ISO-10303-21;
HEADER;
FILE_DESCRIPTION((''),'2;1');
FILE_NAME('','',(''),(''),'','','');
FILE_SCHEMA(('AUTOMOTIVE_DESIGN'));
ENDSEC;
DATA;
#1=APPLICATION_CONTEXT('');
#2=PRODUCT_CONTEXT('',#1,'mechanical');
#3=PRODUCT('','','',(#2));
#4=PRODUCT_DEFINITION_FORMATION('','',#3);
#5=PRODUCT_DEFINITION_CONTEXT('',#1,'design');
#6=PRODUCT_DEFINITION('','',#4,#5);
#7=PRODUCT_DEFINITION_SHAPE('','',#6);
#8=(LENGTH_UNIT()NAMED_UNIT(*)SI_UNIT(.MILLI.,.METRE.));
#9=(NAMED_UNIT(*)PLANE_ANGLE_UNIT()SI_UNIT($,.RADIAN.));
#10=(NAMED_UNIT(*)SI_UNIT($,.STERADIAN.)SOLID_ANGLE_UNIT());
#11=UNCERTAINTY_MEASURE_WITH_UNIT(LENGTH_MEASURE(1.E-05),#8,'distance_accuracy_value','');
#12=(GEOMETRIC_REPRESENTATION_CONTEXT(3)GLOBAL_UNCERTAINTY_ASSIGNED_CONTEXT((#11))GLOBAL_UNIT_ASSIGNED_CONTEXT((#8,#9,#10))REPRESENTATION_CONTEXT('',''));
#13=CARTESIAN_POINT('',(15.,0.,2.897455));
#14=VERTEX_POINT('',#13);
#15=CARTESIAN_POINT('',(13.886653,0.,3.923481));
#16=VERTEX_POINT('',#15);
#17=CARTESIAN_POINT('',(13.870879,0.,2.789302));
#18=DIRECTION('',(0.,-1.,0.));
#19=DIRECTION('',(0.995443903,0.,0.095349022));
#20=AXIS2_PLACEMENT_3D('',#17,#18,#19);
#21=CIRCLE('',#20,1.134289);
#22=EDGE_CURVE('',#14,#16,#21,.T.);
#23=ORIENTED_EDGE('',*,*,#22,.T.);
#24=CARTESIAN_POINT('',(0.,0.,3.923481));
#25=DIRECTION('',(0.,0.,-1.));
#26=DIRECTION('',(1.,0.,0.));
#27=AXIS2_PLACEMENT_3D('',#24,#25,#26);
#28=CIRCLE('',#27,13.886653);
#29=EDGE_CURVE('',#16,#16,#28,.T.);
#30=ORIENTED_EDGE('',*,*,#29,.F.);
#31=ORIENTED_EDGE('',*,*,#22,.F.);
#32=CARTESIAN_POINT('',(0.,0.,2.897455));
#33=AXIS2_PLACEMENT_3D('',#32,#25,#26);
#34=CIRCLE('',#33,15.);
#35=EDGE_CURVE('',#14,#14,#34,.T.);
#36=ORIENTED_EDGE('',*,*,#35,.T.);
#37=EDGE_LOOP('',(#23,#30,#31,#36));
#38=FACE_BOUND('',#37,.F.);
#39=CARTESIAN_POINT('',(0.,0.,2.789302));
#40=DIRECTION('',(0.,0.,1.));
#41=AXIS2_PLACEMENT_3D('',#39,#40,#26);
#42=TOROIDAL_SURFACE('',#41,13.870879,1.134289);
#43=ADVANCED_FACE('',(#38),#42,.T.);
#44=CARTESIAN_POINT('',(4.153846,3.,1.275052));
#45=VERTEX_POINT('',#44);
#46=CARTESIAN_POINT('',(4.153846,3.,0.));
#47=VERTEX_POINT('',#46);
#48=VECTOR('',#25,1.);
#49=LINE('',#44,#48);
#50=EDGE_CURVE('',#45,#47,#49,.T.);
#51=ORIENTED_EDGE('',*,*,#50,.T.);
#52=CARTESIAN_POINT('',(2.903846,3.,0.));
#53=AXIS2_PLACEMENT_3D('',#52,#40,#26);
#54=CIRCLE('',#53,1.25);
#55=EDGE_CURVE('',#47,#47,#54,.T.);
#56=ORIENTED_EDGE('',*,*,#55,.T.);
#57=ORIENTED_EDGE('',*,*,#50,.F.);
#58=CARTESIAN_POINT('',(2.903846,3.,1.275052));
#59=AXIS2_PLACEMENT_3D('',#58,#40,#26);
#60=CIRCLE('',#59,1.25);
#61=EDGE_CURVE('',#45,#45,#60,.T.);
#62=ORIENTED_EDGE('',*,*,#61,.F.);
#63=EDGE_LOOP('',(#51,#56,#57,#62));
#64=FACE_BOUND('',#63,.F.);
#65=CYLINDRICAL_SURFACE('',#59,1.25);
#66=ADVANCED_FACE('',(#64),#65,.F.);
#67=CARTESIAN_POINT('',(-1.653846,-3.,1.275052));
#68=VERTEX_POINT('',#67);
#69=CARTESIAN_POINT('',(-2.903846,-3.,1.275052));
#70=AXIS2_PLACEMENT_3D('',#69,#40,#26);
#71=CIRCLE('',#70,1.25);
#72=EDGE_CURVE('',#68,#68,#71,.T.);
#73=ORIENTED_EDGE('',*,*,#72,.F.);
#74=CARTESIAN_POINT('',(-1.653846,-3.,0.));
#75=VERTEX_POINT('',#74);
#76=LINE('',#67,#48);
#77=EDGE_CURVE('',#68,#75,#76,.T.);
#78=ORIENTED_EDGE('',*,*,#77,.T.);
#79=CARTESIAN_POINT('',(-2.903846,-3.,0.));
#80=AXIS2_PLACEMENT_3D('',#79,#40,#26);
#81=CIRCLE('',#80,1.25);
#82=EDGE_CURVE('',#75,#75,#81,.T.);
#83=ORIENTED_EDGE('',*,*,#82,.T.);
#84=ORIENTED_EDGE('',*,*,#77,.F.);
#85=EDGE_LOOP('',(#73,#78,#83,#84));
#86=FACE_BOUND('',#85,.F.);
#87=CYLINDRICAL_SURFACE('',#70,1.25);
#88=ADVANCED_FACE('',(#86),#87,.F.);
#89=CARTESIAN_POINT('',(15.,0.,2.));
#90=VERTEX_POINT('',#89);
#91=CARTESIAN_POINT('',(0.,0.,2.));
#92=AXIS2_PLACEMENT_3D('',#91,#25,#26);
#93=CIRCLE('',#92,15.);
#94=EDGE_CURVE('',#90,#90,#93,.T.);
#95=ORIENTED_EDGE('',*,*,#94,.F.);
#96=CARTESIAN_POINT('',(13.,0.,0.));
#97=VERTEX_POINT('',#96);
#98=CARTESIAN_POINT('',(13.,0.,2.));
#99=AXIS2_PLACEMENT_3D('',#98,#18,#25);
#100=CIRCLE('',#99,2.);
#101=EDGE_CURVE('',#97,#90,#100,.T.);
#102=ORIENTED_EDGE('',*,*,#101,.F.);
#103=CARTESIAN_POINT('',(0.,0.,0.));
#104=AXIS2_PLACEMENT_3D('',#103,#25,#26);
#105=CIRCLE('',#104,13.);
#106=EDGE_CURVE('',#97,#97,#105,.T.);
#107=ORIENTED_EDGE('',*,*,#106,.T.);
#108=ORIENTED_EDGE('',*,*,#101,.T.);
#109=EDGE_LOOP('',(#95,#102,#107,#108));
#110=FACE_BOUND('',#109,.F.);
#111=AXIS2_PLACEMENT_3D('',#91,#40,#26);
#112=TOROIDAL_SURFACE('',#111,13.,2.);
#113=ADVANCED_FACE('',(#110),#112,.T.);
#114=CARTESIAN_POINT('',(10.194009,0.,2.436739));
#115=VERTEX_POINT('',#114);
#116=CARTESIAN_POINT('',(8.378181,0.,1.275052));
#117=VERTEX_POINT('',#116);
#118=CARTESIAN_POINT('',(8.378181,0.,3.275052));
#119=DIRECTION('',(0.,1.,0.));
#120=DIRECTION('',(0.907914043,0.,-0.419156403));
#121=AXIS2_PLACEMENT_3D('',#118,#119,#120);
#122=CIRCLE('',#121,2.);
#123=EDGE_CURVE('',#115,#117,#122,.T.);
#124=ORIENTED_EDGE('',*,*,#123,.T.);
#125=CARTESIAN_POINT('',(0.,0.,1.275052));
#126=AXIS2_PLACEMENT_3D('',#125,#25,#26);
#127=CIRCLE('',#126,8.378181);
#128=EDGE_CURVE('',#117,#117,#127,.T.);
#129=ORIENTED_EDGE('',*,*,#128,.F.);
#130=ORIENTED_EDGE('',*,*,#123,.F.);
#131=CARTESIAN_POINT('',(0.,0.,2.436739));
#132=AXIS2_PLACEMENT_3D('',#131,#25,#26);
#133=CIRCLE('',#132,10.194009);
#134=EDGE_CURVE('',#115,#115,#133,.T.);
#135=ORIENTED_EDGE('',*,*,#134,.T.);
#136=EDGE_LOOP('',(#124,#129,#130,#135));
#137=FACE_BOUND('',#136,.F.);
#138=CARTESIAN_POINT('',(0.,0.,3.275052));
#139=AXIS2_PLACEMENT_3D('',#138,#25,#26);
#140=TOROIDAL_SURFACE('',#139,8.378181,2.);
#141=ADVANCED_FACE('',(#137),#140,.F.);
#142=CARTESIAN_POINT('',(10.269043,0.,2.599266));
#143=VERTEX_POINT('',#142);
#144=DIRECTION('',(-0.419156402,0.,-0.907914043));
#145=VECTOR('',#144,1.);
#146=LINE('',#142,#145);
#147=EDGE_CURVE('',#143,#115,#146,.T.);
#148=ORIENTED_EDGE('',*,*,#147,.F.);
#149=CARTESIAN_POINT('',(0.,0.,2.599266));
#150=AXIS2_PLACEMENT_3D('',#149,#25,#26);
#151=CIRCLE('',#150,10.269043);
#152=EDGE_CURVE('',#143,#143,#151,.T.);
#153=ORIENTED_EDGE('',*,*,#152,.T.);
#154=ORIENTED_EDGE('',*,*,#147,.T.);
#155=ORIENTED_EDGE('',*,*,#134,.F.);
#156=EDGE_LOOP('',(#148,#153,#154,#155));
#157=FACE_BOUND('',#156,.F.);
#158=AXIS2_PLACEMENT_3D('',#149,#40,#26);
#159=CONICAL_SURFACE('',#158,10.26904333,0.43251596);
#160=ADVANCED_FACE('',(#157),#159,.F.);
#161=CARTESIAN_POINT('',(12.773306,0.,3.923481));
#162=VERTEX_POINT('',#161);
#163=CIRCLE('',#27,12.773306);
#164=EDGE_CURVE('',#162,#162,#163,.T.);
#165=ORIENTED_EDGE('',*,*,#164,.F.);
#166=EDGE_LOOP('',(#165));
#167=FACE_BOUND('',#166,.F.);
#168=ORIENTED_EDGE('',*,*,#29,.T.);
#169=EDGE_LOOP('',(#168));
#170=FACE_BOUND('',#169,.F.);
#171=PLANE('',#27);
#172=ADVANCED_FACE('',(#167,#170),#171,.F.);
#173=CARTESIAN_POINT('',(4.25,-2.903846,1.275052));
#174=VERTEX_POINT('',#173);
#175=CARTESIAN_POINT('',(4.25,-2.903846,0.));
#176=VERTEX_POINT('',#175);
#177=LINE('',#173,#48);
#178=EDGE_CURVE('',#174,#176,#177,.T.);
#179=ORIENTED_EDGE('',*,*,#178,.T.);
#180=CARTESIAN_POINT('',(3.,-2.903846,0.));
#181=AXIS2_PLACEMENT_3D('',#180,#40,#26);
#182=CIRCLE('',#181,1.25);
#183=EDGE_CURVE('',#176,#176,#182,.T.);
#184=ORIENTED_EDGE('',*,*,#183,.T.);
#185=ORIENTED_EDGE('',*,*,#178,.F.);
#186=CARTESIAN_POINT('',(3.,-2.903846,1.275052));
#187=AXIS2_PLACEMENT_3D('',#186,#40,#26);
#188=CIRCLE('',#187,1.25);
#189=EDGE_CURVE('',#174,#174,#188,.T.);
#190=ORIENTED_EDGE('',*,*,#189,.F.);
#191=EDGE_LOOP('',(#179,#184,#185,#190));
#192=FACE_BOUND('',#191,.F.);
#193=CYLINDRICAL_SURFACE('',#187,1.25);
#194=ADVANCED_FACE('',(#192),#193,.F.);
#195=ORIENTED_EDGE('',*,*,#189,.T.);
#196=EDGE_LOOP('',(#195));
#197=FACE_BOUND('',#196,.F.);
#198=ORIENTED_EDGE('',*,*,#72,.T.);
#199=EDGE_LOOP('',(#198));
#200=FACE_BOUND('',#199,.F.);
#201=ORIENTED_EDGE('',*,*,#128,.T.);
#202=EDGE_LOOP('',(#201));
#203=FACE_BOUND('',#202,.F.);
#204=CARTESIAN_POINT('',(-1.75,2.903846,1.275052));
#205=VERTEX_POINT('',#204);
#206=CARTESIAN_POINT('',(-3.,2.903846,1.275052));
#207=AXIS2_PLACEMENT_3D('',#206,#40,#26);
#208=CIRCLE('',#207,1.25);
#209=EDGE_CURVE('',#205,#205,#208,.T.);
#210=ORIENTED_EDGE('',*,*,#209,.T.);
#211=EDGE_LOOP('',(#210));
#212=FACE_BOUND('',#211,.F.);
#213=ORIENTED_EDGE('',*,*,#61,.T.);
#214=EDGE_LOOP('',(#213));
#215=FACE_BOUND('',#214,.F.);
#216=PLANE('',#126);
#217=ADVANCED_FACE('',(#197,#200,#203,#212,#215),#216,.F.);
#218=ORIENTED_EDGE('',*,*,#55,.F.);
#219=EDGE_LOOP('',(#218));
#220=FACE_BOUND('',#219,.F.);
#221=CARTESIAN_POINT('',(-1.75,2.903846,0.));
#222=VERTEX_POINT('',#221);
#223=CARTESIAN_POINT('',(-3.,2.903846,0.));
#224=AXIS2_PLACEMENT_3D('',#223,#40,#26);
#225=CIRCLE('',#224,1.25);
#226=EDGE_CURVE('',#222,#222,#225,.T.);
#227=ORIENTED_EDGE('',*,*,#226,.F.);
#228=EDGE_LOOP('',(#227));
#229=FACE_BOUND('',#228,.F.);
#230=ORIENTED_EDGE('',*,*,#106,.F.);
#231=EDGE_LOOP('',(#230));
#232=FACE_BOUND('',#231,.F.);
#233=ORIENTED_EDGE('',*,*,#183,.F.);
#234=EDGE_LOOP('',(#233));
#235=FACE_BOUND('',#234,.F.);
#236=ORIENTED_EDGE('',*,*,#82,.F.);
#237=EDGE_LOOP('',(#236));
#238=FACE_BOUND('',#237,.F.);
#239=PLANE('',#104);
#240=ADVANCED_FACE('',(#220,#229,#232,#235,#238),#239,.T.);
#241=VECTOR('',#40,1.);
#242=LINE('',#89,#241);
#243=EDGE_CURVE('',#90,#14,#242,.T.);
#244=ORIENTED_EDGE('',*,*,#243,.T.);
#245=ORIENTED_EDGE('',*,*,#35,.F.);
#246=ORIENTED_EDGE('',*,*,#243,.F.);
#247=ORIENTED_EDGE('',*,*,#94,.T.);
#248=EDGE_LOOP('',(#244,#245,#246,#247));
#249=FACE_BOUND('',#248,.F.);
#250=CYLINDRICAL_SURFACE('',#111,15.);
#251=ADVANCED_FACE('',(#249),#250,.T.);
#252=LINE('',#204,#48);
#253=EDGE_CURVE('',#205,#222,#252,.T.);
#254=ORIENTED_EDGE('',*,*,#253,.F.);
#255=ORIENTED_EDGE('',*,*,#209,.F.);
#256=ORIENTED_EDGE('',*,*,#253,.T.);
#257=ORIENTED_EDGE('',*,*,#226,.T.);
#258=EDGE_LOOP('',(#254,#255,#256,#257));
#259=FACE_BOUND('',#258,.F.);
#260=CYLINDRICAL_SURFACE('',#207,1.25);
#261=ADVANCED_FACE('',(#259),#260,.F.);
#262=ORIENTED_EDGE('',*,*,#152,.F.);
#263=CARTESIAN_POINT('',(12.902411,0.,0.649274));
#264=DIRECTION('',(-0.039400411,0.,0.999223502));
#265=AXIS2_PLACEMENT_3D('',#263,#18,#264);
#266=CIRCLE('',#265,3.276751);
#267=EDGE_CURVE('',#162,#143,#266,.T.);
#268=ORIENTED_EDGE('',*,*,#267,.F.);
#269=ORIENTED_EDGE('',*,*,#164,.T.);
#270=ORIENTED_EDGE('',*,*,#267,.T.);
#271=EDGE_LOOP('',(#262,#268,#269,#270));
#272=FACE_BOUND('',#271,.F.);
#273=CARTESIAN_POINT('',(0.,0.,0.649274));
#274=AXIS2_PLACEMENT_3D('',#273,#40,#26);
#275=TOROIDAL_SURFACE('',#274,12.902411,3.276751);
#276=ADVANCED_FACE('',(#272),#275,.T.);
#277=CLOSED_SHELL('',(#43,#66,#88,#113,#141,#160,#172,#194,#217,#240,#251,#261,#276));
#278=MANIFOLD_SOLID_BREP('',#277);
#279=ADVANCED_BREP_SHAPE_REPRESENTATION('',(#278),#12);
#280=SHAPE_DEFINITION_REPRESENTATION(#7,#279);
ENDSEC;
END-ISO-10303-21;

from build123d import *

# Parameters (mm, degrees)
F2_R     = 1.25
F3_DEPTH = 5.1


# Not quite as in the source:
# - a feature names something its author has since deleted; it is built from what else it names


with BuildPart() as f1:
    # F0 (on Front) → F1 (revolve)
    with BuildSketch(Plane.XZ):
        with BuildLine():
            Line((0, 1.2750519672), (0, 0))
            Line((0, 0), (13, 0))
            ThreePointArc((13, 0), (14.4142135624, 0.5857864376), (15, 2))
            Line((15, 2), (15, 2.8974551242))
            ThreePointArc((15, 2.8974551242), (14.6395651733, 3.6234077181), (13.8866530545, 3.9234806662))
            Line((13.8866530545, 3.9234806662), (12.773306109, 3.9234806662))
            ThreePointArc((12.773306109, 3.9234806662), (11.3706801368, 3.5459784592), (10.2690433302, 2.5992663167))
            Line((10.2690433302, 2.5992663167), (10.1940094677, 2.4367391619))
            ThreePointArc((10.1940094677, 2.4367391619), (9.4559973183, 1.5903226699), (8.378181381, 1.2750519672))
            Line((8.378181381, 1.2750519672), (0, 1.2750519672))
        make_face()
    revolve(axis=Axis((0, 0, 0.6375259836), (0, 0, -1)))

    # F2 (on face) → F3 (cut)
    with BuildSketch(Plane.XY.offset(1.2750519672)):
        with Locations((3.0000000261, -2.9038460925)):
            Circle(F2_R)
        with Locations((2.9038460925, 3.0000000261)):
            Circle(F2_R)
        with Locations((-3.0000000261, 2.9038460925)):
            Circle(F2_R)
        with Locations((-2.9038460925, -3.0000000261)):
            Circle(F2_R)
    extrude(amount=-F3_DEPTH, mode=Mode.SUBTRACT)


solid = f1.part
